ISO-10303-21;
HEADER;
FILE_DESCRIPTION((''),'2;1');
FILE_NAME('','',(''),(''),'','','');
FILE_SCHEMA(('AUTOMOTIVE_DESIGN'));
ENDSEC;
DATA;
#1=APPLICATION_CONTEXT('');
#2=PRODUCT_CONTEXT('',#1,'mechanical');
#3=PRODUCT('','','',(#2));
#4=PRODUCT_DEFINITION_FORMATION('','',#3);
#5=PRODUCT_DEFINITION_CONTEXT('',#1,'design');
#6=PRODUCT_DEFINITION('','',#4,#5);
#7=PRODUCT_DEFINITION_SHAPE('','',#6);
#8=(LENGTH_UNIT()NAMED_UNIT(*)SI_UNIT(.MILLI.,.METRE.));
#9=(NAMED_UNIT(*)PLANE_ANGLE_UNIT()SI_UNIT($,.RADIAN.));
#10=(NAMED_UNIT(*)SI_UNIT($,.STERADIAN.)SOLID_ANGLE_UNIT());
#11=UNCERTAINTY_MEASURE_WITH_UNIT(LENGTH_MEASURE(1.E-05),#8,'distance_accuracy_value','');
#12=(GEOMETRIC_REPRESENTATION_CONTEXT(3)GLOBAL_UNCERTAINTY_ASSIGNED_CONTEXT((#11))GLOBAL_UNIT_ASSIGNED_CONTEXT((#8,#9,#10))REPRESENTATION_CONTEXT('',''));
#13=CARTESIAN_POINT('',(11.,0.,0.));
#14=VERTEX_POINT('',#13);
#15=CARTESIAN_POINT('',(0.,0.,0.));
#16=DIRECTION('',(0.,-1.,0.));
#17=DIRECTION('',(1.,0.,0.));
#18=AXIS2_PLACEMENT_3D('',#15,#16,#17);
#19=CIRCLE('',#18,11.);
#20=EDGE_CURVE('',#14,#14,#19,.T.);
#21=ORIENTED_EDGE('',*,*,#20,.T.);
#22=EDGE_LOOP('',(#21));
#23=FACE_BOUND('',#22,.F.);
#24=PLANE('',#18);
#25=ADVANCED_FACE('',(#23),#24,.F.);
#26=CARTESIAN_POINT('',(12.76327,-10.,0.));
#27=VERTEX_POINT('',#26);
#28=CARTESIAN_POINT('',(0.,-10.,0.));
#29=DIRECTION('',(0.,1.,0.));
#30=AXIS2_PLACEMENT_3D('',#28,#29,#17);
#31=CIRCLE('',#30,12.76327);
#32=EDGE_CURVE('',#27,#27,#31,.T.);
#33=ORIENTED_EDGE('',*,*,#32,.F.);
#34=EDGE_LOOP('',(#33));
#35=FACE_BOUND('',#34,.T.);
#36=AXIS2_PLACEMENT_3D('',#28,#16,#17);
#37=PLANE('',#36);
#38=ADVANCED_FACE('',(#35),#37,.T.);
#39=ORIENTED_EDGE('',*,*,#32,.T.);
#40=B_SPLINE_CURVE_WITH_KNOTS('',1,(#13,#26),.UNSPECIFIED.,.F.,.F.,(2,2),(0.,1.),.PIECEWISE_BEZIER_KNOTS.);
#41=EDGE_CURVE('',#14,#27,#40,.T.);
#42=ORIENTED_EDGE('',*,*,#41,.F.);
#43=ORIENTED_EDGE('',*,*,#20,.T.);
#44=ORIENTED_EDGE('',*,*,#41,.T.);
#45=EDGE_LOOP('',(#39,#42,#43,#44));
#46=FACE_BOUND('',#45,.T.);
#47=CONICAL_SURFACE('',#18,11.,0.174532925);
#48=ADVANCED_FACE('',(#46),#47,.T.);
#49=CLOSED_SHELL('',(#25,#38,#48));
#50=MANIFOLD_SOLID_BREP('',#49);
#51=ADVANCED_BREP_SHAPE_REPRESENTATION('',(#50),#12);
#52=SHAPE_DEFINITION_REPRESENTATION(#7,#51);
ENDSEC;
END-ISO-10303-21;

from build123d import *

# Parameters (mm, degrees)
F0_R     = 11
F1_DEPTH = 10
F1_TAPER = -10


# Not quite as in the source:
# - the program builds the solid bodies; features that only make, move or delete a surface that nothing else refers to are left out


with BuildPart() as f1:
    # F0 (on Front) → F1 (new body)
    with BuildSketch(Plane.XZ):
        Circle(F0_R)
    extrude(amount=F1_DEPTH, taper=F1_TAPER)


solid = f1.part
